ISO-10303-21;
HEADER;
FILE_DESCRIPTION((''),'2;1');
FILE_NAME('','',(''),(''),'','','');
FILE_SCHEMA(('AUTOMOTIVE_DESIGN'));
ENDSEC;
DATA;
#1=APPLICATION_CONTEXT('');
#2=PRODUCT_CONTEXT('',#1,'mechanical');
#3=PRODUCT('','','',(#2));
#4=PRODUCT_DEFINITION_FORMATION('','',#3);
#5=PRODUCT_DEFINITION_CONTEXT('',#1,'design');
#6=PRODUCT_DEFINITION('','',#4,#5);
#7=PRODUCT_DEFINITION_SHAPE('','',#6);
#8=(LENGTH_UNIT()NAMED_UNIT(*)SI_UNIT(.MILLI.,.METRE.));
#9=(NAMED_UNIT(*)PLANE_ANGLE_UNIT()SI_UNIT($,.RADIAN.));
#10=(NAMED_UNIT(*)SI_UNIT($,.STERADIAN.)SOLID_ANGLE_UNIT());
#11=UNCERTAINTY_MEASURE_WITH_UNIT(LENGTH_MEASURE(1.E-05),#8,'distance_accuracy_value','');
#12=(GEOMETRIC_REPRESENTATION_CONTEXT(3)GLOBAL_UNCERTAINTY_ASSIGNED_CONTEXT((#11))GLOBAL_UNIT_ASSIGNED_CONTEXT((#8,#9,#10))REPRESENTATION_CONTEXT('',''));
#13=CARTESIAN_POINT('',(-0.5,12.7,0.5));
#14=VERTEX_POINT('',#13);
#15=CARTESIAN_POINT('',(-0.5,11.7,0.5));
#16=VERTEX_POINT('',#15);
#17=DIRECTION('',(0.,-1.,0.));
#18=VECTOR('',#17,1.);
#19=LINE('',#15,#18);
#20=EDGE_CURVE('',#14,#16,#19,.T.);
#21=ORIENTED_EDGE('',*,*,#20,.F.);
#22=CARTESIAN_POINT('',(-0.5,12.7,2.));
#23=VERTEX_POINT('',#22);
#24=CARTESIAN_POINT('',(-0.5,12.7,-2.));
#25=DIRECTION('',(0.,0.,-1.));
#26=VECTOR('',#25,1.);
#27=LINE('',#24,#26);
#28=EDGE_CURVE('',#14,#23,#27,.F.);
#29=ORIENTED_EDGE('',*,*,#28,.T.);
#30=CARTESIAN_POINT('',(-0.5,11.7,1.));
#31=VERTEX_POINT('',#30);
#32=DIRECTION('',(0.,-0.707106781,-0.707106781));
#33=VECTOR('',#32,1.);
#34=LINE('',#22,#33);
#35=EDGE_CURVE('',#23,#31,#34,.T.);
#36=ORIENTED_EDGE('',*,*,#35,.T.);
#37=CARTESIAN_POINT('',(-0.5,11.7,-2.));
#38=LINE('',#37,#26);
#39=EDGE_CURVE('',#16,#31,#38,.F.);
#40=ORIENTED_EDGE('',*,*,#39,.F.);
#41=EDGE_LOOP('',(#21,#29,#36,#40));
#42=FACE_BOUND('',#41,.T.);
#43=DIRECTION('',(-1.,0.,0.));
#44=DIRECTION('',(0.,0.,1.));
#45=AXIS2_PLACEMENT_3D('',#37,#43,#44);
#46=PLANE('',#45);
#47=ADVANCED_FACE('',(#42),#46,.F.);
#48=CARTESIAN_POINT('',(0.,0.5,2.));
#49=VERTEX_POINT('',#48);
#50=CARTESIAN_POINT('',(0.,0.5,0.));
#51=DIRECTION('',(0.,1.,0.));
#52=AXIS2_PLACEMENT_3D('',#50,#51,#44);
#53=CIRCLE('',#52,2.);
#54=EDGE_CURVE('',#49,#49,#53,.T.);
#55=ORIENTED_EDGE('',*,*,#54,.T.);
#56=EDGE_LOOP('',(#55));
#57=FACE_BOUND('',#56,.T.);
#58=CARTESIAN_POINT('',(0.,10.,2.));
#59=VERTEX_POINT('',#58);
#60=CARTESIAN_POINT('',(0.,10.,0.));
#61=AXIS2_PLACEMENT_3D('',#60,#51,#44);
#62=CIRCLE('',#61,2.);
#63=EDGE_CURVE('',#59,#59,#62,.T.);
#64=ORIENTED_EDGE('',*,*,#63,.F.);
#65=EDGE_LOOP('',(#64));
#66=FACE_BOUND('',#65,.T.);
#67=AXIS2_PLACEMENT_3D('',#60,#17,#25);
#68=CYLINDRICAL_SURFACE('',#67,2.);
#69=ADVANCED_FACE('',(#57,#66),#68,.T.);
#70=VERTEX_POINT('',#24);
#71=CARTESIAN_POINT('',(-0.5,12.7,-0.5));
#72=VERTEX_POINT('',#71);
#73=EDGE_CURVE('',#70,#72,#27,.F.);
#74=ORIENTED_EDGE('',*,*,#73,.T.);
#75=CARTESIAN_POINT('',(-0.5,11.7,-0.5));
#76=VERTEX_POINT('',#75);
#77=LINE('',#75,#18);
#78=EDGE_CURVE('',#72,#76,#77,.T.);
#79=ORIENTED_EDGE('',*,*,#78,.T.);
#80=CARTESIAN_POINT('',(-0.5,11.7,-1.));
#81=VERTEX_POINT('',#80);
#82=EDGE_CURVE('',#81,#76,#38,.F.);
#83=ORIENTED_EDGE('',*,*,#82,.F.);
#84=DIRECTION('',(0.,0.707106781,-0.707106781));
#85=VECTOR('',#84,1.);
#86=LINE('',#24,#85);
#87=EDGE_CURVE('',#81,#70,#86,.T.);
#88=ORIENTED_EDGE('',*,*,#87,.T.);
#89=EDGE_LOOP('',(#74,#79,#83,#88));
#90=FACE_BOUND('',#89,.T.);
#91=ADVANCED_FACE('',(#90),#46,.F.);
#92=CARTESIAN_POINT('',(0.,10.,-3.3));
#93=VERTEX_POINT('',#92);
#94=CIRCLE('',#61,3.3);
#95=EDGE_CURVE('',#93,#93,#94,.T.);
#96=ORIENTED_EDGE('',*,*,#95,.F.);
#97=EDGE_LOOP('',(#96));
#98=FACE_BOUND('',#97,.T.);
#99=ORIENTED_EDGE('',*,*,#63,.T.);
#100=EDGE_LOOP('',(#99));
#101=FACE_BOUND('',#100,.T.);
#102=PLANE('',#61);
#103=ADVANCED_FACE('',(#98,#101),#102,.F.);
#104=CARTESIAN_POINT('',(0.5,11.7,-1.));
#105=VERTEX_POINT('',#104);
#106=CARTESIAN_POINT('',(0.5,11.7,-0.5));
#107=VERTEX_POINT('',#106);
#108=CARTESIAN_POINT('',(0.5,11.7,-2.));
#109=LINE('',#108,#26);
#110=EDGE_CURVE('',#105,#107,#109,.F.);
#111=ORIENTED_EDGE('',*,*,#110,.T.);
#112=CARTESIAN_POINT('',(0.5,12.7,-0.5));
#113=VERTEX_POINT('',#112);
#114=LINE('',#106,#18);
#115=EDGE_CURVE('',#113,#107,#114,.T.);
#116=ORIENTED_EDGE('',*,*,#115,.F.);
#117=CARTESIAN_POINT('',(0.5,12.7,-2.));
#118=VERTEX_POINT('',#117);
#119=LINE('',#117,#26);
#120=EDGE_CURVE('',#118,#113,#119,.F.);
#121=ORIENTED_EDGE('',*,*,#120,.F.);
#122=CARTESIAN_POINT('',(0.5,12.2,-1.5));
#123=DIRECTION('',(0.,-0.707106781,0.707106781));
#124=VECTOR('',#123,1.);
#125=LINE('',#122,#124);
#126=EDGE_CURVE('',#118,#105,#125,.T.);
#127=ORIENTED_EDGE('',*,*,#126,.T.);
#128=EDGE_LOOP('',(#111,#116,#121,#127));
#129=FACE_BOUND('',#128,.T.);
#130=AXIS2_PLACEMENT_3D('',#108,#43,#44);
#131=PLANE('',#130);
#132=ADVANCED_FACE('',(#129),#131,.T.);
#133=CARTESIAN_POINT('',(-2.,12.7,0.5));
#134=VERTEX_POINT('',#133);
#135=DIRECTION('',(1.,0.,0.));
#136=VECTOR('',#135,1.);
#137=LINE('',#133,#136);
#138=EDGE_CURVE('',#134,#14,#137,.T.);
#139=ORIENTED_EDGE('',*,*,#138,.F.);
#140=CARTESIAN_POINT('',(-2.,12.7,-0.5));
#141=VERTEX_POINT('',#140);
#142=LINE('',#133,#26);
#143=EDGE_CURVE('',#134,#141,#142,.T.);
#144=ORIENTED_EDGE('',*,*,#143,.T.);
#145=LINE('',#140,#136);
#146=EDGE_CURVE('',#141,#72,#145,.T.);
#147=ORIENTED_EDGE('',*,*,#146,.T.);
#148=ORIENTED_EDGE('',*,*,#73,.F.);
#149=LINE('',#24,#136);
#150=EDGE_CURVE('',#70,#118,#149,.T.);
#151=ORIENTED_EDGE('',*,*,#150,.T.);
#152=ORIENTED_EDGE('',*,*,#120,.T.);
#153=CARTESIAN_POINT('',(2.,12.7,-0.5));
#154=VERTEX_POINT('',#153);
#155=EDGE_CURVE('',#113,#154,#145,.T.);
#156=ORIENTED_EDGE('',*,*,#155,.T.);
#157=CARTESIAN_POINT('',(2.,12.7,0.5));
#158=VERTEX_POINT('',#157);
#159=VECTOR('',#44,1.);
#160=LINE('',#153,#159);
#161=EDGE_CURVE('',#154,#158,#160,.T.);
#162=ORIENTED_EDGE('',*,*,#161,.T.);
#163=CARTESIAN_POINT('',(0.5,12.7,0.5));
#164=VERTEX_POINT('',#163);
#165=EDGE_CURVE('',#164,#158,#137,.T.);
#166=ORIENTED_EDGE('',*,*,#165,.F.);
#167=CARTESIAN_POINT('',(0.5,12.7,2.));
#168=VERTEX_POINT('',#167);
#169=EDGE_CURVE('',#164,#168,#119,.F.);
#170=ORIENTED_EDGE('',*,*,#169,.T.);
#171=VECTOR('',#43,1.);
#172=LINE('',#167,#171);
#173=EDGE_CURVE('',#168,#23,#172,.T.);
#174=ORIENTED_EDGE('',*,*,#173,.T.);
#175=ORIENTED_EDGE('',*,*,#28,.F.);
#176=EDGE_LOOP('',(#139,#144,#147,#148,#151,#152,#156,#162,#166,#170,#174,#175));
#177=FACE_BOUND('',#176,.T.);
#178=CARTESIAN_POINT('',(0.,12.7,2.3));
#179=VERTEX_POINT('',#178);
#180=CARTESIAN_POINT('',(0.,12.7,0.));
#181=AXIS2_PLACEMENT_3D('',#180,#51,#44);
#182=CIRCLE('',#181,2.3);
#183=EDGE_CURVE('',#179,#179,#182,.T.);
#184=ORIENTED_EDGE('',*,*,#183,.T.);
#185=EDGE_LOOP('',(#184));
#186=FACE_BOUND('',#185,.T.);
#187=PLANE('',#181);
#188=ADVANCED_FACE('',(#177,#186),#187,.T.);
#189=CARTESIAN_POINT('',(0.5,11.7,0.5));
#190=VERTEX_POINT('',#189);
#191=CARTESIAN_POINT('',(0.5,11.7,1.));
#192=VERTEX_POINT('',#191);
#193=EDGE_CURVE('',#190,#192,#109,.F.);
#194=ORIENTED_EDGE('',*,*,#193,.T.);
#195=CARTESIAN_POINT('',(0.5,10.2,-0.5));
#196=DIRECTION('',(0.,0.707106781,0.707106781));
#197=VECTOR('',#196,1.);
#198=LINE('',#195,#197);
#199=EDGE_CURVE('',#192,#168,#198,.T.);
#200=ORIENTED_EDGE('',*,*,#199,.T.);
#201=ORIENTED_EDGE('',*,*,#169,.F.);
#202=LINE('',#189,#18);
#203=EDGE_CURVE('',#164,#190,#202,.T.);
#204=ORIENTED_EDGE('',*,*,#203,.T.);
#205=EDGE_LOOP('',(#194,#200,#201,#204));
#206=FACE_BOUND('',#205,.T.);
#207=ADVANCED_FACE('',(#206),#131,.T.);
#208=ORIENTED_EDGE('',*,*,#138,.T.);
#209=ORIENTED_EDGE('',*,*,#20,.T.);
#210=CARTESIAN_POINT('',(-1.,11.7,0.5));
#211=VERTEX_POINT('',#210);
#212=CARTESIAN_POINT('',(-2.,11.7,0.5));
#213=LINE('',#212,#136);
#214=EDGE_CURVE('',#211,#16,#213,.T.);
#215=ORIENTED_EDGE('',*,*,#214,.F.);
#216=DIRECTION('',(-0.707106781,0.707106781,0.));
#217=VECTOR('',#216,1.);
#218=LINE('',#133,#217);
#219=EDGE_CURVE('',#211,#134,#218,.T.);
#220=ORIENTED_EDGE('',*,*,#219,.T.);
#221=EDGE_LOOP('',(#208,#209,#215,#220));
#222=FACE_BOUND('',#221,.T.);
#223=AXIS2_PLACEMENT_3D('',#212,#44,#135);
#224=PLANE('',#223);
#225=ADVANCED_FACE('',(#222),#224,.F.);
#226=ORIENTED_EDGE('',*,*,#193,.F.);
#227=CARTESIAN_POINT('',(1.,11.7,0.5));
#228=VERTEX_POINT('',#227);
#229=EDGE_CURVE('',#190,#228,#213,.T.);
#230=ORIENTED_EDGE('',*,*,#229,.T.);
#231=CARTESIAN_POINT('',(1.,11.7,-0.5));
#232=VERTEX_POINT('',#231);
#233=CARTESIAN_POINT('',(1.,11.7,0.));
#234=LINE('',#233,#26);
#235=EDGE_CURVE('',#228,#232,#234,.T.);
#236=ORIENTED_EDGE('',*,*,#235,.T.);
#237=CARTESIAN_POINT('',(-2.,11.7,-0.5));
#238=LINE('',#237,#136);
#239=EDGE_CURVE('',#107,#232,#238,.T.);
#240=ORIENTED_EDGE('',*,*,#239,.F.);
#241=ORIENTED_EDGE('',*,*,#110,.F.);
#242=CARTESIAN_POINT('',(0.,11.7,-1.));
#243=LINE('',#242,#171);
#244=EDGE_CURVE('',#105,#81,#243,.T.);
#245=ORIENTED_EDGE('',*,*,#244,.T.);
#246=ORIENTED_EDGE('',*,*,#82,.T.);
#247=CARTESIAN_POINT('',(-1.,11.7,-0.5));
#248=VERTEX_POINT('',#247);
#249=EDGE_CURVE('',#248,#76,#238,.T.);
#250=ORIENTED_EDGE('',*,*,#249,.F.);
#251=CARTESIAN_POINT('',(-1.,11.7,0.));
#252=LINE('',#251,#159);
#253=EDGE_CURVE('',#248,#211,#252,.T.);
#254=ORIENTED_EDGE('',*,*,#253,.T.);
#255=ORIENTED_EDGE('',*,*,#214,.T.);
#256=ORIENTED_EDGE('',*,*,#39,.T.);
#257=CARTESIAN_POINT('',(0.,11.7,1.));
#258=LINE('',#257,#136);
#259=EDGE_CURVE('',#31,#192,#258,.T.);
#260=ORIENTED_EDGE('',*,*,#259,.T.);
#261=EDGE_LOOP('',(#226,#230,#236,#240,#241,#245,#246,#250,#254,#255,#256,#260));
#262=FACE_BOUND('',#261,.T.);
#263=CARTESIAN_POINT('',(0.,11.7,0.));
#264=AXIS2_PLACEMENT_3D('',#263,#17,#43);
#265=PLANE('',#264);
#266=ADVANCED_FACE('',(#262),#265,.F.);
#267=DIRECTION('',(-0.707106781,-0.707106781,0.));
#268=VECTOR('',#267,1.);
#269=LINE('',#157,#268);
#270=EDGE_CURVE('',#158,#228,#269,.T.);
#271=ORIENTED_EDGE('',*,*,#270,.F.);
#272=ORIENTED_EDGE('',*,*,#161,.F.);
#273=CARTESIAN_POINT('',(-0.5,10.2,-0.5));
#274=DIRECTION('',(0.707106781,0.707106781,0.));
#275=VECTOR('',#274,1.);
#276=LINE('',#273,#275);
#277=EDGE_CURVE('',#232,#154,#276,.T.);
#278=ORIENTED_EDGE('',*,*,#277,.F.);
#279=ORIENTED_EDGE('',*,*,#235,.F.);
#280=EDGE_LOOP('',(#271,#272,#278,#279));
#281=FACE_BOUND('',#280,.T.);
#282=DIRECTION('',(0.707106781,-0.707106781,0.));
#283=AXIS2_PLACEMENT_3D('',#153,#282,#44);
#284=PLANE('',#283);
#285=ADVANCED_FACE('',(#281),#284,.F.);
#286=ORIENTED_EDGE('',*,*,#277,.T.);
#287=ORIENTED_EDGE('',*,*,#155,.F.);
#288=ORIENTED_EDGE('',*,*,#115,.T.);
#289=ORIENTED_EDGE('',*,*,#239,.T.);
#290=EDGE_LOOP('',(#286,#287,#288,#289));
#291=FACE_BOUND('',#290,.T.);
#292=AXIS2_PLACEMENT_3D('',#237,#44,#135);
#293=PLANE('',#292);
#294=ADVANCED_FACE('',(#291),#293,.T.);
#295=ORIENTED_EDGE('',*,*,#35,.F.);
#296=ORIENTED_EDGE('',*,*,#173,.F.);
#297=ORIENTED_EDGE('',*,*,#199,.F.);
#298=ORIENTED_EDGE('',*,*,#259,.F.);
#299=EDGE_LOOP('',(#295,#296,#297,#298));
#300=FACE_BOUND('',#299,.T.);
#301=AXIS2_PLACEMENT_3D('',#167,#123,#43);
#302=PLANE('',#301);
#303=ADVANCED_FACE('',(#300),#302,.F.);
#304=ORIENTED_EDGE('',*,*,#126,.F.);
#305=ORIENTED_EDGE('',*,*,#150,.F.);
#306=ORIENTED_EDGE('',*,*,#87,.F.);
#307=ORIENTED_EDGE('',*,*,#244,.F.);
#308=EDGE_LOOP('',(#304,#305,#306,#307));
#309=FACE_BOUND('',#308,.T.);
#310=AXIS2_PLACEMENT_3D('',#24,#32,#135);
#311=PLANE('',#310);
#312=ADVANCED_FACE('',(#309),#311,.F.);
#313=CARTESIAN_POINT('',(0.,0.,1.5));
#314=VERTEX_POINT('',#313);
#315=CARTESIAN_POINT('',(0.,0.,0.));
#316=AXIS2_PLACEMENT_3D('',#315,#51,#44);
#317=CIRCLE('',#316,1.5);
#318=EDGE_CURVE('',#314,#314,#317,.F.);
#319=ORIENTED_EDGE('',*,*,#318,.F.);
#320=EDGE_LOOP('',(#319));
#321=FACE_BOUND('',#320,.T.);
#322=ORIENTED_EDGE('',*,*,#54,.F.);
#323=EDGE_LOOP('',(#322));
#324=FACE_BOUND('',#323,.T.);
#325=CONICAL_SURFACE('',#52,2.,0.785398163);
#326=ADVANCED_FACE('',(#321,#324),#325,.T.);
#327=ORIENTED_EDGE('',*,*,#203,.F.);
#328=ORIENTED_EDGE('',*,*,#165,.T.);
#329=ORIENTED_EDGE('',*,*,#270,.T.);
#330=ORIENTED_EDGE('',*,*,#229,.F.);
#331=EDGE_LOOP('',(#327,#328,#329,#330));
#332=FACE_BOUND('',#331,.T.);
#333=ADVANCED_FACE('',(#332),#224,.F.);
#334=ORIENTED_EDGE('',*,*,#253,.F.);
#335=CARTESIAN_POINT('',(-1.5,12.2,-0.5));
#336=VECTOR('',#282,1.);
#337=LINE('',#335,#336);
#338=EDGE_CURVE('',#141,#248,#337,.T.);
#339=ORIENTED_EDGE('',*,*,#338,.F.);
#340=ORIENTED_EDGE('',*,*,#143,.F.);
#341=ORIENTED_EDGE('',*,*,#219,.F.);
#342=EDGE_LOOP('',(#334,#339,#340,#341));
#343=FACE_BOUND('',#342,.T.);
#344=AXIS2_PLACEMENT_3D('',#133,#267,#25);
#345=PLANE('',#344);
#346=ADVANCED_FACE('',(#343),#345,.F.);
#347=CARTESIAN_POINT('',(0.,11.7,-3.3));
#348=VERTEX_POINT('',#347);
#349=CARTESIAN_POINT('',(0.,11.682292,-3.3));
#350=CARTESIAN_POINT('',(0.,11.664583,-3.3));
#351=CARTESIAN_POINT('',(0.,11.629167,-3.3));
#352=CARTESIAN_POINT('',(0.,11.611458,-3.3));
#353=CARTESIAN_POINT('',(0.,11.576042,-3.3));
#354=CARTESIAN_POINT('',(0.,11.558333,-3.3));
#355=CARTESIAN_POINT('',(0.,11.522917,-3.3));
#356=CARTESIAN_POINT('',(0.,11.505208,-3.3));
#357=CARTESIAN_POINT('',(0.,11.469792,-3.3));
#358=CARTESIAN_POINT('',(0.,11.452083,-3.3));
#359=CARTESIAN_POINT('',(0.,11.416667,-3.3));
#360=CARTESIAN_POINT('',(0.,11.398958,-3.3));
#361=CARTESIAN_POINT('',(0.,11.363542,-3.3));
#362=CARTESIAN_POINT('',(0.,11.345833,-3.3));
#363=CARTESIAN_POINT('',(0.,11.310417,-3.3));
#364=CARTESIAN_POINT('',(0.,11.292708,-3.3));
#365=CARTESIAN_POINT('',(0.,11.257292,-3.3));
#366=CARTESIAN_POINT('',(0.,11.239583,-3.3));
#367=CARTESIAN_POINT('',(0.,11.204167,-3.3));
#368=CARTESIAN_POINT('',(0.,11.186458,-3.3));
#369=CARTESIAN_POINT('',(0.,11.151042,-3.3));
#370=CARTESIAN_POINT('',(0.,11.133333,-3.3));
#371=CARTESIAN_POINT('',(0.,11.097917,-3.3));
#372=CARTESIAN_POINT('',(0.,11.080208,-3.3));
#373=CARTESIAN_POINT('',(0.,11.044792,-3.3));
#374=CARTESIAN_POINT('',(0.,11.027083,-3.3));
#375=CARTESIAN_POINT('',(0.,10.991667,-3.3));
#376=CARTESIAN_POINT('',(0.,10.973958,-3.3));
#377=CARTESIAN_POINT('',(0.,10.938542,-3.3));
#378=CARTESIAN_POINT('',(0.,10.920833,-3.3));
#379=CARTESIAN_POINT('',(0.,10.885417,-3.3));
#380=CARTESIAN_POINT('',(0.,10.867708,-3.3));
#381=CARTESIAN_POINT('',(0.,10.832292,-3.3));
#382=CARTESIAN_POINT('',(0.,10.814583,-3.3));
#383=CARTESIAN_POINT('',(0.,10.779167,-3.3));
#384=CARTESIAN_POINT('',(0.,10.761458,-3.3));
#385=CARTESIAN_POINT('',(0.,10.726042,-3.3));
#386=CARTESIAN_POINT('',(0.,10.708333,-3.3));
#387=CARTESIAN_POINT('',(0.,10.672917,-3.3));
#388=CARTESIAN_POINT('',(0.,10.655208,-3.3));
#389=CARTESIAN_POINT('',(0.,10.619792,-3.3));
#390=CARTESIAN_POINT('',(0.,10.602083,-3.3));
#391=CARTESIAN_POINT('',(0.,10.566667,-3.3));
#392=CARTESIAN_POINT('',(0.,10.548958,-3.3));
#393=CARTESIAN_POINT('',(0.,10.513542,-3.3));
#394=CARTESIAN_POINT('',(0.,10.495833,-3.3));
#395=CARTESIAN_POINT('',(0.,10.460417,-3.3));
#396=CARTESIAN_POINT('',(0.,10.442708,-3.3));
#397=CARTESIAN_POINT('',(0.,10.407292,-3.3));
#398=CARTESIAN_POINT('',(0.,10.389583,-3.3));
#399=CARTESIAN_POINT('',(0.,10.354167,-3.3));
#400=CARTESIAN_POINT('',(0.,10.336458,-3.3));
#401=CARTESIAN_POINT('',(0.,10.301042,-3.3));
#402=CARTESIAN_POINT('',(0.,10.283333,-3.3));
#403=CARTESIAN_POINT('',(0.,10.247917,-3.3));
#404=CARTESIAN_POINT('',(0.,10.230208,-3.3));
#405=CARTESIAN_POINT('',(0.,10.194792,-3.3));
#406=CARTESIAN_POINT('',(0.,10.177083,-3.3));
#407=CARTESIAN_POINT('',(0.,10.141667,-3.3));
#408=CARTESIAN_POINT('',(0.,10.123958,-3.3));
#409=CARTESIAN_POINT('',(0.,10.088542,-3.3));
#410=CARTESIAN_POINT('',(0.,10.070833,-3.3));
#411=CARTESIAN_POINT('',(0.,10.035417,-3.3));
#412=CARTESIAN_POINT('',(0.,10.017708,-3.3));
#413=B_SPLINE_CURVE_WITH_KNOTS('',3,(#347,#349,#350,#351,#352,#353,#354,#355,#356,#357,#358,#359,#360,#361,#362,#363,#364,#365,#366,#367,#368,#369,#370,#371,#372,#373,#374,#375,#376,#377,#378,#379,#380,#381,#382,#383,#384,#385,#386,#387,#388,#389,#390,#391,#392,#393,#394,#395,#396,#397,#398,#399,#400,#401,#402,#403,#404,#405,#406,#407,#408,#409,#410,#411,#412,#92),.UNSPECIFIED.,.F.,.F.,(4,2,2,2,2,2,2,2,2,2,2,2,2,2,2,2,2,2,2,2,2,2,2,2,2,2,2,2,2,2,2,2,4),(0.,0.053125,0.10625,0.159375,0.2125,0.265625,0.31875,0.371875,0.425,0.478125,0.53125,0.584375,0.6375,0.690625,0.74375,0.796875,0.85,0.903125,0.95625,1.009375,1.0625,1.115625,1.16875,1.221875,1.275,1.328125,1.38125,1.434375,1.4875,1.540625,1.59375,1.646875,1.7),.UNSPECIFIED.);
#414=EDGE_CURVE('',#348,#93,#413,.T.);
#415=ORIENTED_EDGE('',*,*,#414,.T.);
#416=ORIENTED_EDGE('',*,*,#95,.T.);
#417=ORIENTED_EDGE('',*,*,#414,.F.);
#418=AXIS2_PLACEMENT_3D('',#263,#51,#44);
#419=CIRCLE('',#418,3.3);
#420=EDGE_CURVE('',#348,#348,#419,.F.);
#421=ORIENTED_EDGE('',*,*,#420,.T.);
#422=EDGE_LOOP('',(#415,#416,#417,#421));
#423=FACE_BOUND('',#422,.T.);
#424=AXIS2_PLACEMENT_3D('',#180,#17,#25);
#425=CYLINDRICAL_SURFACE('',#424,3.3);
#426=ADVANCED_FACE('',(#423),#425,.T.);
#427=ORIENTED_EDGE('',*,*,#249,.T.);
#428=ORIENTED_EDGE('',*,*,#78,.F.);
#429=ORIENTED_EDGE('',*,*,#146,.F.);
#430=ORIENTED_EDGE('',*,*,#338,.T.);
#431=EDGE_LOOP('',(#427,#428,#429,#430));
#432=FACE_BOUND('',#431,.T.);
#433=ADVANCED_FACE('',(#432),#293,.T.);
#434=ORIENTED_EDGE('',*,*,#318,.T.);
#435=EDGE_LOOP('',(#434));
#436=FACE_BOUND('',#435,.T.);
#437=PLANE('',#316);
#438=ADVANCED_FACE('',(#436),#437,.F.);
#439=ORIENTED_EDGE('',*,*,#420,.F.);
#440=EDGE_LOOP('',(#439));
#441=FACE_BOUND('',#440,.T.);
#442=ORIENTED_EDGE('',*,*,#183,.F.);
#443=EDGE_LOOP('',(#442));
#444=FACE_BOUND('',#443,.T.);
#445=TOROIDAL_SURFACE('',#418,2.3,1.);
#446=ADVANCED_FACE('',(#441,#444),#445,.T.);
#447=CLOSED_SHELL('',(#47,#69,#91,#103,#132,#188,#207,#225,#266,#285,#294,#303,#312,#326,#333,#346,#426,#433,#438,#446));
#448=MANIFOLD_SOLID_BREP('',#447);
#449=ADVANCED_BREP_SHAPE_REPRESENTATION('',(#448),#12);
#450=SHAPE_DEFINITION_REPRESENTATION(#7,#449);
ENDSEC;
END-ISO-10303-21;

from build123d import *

# Parameters (mm, degrees)
SKETCH_1_R          = 2
EXTRUDE_1_DEPTH     = 10
SKETCH_2_R          = 3.3
EXTRUDE_2_DEPTH     = 2.7
FILLET_1_R          = 1
CHAMFER_1_SIZE      = 0.5
SKETCH_3_W          = 4
SKETCH_3_H          = 1
SKETCH_3_W_2        = 1
SKETCH_3_H_2        = 4
CUT_EXTRUDE_1_DEPTH = 1
CHAMFER_2_SIZE      = 1


with BuildPart() as part:
    # 草图1 → 凸台-拉伸1 (new body)
    with BuildSketch(Plane(origin=(0, 0, 0), x_dir=(1, 0, 0), z_dir=(0, 1, 0))):
        with Locations(Location((0, 0, 0), (0, 0, 270))):
            Circle(SKETCH_1_R)
    extrude(amount=EXTRUDE_1_DEPTH)

    # 草图2 → 凸台-拉伸2 (add)
    with BuildSketch(Plane(origin=(0, 10, 0), x_dir=(1, 0, 0), z_dir=(0, 1, 0))):
        with Locations(Location((0, 0, 0), (0, 0, 90))):
            Circle(SKETCH_2_R)
    extrude(amount=EXTRUDE_2_DEPTH)

    # 圆角1
    fillet_1_edges = [part.edges().sort_by_distance(p)[0] for p in [
        (0, 12.7, 3.3),
    ]]
    fillet(fillet_1_edges, radius=FILLET_1_R)

    # 倒角1
    chamfer_1_edges = [part.edges().sort_by_distance(p)[0] for p in [
        (0, 0, -2),
    ]]
    chamfer(chamfer_1_edges, length=CHAMFER_1_SIZE)

    # 草图3 → 切除-拉伸-薄壁1 (cut)
    with BuildSketch(Plane(origin=(0, 12.7, 0), x_dir=(1, 0, 0), z_dir=(0, 1, 0))):
        Rectangle(SKETCH_3_W, SKETCH_3_H)
        Rectangle(SKETCH_3_W_2, SKETCH_3_H_2)
    extrude(amount=-CUT_EXTRUDE_1_DEPTH, mode=Mode.SUBTRACT)

    # 倒角2
    chamfer_2_edges = [part.edges().sort_by_distance(p)[0] for p in [
        (0, 11.7, 2),
        (2, 11.7, 0),
        (0, 11.7, -2),
        (-2, 11.7, 0),
    ]]
    chamfer(chamfer_2_edges, length=CHAMFER_2_SIZE - 0.0001)  # a hair under: the kernel refuses the full size


solid = part.part
